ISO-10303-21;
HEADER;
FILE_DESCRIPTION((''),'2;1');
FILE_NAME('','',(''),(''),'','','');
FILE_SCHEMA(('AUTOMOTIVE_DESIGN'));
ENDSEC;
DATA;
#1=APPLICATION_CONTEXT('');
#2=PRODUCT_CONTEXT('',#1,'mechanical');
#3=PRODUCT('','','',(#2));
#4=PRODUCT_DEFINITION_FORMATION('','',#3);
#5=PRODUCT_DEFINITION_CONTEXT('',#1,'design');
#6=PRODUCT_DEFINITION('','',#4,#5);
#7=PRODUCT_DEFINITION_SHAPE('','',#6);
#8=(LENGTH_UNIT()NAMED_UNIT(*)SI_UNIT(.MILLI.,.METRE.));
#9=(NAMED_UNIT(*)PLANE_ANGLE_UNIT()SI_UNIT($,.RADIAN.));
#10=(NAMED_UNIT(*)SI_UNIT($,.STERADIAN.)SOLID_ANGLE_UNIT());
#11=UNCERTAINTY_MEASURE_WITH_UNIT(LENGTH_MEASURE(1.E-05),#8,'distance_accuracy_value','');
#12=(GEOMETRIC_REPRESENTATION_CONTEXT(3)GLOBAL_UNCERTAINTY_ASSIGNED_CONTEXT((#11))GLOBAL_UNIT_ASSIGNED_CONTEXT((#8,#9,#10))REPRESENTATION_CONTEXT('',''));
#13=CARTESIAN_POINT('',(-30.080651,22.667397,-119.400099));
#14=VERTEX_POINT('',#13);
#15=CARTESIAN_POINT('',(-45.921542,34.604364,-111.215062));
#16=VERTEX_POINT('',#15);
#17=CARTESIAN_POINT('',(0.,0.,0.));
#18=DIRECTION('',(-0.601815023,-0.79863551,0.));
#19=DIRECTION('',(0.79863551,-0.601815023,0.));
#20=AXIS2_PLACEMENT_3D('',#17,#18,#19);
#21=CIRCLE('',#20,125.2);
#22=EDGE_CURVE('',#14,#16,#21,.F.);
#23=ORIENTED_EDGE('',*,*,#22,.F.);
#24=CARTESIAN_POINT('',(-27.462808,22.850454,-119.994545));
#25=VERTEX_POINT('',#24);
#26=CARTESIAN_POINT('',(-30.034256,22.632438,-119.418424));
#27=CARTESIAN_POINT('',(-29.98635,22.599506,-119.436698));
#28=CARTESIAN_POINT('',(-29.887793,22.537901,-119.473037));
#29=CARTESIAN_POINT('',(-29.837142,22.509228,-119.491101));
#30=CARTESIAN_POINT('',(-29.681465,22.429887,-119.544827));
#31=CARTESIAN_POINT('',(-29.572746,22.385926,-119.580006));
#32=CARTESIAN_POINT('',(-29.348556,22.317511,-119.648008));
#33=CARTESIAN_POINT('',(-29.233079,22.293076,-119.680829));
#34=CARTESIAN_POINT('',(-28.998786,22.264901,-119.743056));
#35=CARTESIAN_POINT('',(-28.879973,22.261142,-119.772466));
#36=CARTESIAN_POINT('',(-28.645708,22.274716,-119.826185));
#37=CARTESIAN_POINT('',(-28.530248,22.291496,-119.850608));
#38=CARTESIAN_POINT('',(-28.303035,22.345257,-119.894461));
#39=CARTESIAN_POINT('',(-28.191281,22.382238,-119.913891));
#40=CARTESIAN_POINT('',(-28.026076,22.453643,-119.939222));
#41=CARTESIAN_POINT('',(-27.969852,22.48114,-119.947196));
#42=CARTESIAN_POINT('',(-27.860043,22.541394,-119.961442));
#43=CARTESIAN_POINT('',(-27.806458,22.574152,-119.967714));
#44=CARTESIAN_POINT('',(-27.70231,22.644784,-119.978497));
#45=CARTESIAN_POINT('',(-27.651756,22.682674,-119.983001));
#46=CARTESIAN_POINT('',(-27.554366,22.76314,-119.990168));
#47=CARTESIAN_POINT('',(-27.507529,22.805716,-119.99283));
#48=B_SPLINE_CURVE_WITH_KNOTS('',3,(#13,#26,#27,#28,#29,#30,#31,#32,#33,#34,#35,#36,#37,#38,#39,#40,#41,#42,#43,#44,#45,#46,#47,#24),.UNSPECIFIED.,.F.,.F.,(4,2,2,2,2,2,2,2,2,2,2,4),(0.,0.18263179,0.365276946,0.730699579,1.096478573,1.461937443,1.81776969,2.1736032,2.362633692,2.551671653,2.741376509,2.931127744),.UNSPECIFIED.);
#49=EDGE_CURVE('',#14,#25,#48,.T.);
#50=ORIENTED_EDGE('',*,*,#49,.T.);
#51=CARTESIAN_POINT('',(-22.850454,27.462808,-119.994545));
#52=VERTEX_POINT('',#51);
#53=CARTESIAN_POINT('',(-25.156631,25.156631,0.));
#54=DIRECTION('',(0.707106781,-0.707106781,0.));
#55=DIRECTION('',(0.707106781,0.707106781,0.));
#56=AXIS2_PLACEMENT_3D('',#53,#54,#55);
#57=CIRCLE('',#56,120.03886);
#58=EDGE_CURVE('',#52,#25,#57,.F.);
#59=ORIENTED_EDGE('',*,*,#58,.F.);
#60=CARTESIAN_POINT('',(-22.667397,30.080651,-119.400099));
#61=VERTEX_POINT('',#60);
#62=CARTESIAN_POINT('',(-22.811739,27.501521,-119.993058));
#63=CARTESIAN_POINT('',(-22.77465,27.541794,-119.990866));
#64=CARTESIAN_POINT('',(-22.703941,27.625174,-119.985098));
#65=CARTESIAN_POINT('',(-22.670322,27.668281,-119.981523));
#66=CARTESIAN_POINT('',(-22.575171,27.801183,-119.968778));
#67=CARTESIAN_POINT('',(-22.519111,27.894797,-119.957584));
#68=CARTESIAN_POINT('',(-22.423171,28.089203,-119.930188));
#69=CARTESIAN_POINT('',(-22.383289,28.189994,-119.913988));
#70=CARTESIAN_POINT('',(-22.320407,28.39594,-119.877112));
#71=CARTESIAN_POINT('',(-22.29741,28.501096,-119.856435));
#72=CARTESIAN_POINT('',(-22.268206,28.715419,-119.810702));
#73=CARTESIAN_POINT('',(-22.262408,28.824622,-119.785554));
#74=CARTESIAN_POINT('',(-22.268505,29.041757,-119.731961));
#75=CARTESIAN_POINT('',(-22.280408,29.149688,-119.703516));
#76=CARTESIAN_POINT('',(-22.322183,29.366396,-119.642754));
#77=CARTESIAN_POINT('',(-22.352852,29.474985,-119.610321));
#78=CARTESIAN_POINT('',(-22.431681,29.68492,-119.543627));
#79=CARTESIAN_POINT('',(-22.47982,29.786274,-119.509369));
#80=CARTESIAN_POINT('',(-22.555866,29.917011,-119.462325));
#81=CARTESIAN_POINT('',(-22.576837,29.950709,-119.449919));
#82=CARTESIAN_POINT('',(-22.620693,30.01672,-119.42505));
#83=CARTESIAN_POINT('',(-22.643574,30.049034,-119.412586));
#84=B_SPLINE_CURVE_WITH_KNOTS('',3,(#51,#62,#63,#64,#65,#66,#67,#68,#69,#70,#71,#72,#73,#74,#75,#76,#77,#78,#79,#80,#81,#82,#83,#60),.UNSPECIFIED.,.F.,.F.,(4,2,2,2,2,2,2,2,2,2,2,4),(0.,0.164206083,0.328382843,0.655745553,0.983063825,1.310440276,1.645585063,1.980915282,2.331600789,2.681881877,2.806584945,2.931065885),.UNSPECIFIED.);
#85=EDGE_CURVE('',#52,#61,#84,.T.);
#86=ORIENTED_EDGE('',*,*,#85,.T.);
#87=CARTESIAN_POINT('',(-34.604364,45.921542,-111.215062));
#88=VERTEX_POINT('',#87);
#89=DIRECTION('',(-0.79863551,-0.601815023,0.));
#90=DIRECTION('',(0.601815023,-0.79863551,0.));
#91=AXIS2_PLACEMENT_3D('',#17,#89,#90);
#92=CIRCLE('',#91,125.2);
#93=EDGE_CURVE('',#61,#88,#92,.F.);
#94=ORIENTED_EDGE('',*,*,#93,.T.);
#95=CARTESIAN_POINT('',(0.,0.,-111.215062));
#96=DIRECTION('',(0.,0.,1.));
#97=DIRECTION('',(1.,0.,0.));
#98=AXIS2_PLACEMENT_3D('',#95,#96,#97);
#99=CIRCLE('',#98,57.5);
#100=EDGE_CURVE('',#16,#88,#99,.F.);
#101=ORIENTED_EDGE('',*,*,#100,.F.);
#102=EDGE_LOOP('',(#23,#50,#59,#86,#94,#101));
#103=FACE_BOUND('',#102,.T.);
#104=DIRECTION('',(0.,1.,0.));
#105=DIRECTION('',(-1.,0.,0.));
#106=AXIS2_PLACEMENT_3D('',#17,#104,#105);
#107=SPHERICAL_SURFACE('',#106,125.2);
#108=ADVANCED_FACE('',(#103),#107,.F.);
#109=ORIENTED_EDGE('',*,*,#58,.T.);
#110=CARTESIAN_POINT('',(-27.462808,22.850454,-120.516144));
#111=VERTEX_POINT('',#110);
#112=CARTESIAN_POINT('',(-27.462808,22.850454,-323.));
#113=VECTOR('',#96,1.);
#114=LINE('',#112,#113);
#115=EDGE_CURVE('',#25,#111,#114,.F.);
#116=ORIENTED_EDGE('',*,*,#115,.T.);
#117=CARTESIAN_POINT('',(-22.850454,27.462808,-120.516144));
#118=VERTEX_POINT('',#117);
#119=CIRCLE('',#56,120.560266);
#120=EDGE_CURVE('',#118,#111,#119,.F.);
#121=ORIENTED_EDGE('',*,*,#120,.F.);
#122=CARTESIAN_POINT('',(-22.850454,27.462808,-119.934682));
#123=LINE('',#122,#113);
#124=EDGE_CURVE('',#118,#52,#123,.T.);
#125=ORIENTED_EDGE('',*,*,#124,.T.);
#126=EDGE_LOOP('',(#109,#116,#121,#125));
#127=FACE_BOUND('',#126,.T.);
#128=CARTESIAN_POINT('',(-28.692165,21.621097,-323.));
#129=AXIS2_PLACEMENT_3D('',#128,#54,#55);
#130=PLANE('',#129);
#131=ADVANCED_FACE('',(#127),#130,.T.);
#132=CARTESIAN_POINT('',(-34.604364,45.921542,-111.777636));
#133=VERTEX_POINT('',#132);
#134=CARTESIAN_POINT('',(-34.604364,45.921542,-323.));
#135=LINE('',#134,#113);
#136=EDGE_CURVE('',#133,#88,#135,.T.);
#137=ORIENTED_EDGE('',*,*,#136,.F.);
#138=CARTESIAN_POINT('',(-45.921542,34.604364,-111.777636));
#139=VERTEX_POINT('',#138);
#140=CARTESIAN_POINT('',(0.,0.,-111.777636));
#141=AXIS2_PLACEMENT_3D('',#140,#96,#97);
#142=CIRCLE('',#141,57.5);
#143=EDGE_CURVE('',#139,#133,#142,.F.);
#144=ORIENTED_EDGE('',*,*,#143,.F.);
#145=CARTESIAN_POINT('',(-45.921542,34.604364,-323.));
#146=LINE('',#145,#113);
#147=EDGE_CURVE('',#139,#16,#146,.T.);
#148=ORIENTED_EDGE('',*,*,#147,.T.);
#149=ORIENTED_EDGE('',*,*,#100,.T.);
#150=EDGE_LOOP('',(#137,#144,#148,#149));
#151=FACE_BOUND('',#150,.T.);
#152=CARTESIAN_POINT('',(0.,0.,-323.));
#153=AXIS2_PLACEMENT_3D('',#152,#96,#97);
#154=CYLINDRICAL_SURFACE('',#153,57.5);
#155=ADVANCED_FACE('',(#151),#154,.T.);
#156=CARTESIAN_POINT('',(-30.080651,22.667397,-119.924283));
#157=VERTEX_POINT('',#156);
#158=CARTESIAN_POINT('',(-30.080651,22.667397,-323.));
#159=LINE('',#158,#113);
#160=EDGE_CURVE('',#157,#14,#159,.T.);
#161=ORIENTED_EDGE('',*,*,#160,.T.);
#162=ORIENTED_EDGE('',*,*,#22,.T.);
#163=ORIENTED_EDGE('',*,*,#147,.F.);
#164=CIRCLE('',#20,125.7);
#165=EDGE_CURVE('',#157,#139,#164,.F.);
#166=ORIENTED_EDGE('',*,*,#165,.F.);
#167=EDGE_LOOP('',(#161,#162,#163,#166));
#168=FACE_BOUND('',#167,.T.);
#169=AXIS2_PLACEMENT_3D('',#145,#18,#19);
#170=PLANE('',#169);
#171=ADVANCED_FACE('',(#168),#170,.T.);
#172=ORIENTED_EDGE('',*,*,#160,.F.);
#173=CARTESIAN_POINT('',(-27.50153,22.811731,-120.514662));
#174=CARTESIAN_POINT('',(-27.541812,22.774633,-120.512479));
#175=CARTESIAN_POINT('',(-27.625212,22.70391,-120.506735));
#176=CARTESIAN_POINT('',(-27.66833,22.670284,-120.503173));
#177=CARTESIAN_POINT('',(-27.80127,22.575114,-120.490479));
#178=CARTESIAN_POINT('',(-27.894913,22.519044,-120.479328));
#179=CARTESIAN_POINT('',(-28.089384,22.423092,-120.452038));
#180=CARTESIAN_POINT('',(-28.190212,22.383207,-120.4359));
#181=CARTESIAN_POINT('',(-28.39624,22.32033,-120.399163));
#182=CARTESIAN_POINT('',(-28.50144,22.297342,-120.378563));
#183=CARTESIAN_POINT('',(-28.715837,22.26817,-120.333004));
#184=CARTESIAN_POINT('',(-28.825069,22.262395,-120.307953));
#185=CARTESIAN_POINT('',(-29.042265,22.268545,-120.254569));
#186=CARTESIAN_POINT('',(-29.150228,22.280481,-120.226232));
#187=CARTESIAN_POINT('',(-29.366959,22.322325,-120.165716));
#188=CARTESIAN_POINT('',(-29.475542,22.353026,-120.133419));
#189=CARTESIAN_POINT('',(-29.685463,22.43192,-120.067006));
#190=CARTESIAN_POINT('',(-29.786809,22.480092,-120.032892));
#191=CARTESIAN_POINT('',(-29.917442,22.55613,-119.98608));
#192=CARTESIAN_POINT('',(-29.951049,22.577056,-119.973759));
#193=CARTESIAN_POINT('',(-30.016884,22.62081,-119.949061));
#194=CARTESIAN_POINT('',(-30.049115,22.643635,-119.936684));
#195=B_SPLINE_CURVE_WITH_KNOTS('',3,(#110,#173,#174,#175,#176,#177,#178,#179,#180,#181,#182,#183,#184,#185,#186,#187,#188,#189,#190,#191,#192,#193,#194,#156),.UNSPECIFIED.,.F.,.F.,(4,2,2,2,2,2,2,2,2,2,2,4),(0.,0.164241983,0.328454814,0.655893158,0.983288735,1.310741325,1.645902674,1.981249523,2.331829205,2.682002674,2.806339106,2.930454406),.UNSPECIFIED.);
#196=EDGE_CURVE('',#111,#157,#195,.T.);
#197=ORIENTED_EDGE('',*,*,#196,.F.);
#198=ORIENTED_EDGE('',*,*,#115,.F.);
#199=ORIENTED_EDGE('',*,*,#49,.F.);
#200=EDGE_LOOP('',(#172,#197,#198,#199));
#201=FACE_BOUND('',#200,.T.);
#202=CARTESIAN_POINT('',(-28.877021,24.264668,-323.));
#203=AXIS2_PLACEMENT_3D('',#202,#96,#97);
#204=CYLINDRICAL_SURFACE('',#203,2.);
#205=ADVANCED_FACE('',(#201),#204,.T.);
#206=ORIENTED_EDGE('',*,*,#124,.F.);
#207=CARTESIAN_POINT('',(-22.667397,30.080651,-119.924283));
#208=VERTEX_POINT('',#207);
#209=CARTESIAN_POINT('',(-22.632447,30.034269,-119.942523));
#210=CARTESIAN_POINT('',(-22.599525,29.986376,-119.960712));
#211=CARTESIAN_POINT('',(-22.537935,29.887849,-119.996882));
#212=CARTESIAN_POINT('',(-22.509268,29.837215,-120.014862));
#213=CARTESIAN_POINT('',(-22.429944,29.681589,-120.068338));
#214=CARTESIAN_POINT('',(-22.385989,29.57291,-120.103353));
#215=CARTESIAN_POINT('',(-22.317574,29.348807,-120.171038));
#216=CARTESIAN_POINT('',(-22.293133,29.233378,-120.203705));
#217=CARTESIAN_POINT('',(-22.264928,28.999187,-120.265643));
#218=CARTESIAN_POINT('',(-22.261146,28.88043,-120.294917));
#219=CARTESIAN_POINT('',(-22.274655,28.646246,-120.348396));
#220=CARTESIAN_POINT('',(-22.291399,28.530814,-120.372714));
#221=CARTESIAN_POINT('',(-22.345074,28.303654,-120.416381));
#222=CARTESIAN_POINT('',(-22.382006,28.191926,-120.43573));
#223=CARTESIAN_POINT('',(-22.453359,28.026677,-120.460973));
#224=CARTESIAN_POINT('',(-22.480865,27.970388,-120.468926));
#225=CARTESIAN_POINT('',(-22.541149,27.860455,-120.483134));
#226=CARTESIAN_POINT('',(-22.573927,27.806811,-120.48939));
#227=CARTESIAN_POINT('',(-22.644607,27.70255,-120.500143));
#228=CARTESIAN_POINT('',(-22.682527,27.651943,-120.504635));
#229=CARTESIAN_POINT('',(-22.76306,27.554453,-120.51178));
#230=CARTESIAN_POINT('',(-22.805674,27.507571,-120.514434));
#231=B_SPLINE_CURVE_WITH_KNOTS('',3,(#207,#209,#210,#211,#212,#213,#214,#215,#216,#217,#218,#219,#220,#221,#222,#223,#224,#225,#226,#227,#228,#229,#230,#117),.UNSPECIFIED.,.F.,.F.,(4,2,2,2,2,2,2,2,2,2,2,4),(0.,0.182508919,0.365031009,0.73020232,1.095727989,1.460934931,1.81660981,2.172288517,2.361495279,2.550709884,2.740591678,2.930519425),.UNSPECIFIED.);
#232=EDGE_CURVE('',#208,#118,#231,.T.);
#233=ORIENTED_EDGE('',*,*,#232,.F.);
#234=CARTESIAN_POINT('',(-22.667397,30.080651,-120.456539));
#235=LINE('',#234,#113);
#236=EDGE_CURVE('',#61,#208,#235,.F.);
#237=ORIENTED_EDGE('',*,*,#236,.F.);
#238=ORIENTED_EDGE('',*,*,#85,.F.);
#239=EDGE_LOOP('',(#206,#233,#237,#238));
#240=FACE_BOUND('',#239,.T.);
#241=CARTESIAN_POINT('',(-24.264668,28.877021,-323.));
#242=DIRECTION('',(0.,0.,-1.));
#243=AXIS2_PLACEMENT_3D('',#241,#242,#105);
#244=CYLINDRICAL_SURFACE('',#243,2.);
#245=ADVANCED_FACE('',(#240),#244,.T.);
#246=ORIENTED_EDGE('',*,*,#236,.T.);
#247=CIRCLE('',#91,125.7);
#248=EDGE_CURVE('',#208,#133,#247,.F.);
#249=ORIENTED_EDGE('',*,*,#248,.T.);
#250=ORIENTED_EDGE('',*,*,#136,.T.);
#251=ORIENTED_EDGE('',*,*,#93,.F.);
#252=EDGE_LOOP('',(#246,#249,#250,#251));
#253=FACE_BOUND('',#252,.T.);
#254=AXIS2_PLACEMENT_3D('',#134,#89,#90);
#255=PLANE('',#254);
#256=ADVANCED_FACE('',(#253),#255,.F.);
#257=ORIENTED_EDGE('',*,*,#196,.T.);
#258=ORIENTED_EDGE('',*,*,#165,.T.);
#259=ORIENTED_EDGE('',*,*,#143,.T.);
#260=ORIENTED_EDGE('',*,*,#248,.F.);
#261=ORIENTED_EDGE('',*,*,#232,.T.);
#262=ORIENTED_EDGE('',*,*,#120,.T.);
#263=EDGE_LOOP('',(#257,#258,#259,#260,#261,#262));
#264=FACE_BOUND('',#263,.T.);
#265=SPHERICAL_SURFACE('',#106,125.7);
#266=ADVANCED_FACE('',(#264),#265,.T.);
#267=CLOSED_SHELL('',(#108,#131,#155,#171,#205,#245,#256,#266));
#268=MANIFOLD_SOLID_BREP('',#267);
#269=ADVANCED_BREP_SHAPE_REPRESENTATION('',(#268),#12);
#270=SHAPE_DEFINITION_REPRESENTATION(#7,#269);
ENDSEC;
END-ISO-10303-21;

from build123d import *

# Parameters (mm, degrees)
REVOLVE_1_ANGLE     = 180
SHELL_1_T           = 0.5
SKETCH_1_OUTSIDE_W  = 328.82
SKETCH_1_OUTSIDE_H  = 328.82
CUT_EXTRUDE_1_DEPTH = 323
FILLET_1_R          = 2


with BuildPart() as part:
    # 草图2 → 旋转1 (revolve)
    with BuildSketch(Plane.XY):
        with BuildLine():
            Line((0, -125.2), (0, 125.2))
            ThreePointArc((0, 125.2), (-125.2, 0), (0, -125.2))
        make_face()
    revolve(axis=Axis((0, 151.670850912, 0), (0, -1, 0)), revolution_arc=REVOLVE_1_ANGLE)

    # 抽壳1
    shell_1_openings = [part.faces().sort_by_distance(p)[0] for p in [
        (0, 0, 0),
    ]]
    offset(amount=SHELL_1_T, openings=shell_1_openings)

    # 草图1 outside → 切除-拉伸1 (cut)
    with BuildSketch(Plane.XY):
        Rectangle(SKETCH_1_OUTSIDE_W, SKETCH_1_OUTSIDE_H)
        with BuildLine():
            Line((-45.921541828, 34.604363831), (-28.692164813, 21.621097001))
            Line((-28.692164813, 21.621097001), (-21.621097001, 28.692164813))
            Line((-21.621097001, 28.692164813), (-34.604363831, 45.921541828))
            ThreePointArc((-34.604363831, 45.921541828), (-40.658639918, 40.658639918), (-45.921541828, 34.604363831))
        make_face(mode=Mode.SUBTRACT)
    extrude(amount=-CUT_EXTRUDE_1_DEPTH, mode=Mode.SUBTRACT)

    # 圆角1
    # the kernel refuses this fillet: 2 mm, written as the material it takes off along each edge
    with BuildSketch(Plane(origin=(-21.621097001, 28.692164813, -115.588247879), x_dir=(-0.7071067811865281, -0.707106781186567, 0), z_dir=(0, 0, -1)), Plane(origin=(-28.692164813, 21.621097001, -115.588247879), x_dir=(-0.7986355100472948, 0.6018150231520455, 0), z_dir=(0, 0, -1))) as fillet_1_piece_1:
        with BuildLine():
            CenterArc((FILLET_1_R * 0.869286737816, FILLET_1_R), FILLET_1_R, 188, 82)
            Line((-FILLET_1_R * 0.120981330925, FILLET_1_R * 0.86082689904), (0, 0))
            Line((0, 0), (FILLET_1_R * 0.869286737816, 0))
        make_face()
    extrude(amount=9.214725038, mode=Mode.SUBTRACT)


solid = part.part
